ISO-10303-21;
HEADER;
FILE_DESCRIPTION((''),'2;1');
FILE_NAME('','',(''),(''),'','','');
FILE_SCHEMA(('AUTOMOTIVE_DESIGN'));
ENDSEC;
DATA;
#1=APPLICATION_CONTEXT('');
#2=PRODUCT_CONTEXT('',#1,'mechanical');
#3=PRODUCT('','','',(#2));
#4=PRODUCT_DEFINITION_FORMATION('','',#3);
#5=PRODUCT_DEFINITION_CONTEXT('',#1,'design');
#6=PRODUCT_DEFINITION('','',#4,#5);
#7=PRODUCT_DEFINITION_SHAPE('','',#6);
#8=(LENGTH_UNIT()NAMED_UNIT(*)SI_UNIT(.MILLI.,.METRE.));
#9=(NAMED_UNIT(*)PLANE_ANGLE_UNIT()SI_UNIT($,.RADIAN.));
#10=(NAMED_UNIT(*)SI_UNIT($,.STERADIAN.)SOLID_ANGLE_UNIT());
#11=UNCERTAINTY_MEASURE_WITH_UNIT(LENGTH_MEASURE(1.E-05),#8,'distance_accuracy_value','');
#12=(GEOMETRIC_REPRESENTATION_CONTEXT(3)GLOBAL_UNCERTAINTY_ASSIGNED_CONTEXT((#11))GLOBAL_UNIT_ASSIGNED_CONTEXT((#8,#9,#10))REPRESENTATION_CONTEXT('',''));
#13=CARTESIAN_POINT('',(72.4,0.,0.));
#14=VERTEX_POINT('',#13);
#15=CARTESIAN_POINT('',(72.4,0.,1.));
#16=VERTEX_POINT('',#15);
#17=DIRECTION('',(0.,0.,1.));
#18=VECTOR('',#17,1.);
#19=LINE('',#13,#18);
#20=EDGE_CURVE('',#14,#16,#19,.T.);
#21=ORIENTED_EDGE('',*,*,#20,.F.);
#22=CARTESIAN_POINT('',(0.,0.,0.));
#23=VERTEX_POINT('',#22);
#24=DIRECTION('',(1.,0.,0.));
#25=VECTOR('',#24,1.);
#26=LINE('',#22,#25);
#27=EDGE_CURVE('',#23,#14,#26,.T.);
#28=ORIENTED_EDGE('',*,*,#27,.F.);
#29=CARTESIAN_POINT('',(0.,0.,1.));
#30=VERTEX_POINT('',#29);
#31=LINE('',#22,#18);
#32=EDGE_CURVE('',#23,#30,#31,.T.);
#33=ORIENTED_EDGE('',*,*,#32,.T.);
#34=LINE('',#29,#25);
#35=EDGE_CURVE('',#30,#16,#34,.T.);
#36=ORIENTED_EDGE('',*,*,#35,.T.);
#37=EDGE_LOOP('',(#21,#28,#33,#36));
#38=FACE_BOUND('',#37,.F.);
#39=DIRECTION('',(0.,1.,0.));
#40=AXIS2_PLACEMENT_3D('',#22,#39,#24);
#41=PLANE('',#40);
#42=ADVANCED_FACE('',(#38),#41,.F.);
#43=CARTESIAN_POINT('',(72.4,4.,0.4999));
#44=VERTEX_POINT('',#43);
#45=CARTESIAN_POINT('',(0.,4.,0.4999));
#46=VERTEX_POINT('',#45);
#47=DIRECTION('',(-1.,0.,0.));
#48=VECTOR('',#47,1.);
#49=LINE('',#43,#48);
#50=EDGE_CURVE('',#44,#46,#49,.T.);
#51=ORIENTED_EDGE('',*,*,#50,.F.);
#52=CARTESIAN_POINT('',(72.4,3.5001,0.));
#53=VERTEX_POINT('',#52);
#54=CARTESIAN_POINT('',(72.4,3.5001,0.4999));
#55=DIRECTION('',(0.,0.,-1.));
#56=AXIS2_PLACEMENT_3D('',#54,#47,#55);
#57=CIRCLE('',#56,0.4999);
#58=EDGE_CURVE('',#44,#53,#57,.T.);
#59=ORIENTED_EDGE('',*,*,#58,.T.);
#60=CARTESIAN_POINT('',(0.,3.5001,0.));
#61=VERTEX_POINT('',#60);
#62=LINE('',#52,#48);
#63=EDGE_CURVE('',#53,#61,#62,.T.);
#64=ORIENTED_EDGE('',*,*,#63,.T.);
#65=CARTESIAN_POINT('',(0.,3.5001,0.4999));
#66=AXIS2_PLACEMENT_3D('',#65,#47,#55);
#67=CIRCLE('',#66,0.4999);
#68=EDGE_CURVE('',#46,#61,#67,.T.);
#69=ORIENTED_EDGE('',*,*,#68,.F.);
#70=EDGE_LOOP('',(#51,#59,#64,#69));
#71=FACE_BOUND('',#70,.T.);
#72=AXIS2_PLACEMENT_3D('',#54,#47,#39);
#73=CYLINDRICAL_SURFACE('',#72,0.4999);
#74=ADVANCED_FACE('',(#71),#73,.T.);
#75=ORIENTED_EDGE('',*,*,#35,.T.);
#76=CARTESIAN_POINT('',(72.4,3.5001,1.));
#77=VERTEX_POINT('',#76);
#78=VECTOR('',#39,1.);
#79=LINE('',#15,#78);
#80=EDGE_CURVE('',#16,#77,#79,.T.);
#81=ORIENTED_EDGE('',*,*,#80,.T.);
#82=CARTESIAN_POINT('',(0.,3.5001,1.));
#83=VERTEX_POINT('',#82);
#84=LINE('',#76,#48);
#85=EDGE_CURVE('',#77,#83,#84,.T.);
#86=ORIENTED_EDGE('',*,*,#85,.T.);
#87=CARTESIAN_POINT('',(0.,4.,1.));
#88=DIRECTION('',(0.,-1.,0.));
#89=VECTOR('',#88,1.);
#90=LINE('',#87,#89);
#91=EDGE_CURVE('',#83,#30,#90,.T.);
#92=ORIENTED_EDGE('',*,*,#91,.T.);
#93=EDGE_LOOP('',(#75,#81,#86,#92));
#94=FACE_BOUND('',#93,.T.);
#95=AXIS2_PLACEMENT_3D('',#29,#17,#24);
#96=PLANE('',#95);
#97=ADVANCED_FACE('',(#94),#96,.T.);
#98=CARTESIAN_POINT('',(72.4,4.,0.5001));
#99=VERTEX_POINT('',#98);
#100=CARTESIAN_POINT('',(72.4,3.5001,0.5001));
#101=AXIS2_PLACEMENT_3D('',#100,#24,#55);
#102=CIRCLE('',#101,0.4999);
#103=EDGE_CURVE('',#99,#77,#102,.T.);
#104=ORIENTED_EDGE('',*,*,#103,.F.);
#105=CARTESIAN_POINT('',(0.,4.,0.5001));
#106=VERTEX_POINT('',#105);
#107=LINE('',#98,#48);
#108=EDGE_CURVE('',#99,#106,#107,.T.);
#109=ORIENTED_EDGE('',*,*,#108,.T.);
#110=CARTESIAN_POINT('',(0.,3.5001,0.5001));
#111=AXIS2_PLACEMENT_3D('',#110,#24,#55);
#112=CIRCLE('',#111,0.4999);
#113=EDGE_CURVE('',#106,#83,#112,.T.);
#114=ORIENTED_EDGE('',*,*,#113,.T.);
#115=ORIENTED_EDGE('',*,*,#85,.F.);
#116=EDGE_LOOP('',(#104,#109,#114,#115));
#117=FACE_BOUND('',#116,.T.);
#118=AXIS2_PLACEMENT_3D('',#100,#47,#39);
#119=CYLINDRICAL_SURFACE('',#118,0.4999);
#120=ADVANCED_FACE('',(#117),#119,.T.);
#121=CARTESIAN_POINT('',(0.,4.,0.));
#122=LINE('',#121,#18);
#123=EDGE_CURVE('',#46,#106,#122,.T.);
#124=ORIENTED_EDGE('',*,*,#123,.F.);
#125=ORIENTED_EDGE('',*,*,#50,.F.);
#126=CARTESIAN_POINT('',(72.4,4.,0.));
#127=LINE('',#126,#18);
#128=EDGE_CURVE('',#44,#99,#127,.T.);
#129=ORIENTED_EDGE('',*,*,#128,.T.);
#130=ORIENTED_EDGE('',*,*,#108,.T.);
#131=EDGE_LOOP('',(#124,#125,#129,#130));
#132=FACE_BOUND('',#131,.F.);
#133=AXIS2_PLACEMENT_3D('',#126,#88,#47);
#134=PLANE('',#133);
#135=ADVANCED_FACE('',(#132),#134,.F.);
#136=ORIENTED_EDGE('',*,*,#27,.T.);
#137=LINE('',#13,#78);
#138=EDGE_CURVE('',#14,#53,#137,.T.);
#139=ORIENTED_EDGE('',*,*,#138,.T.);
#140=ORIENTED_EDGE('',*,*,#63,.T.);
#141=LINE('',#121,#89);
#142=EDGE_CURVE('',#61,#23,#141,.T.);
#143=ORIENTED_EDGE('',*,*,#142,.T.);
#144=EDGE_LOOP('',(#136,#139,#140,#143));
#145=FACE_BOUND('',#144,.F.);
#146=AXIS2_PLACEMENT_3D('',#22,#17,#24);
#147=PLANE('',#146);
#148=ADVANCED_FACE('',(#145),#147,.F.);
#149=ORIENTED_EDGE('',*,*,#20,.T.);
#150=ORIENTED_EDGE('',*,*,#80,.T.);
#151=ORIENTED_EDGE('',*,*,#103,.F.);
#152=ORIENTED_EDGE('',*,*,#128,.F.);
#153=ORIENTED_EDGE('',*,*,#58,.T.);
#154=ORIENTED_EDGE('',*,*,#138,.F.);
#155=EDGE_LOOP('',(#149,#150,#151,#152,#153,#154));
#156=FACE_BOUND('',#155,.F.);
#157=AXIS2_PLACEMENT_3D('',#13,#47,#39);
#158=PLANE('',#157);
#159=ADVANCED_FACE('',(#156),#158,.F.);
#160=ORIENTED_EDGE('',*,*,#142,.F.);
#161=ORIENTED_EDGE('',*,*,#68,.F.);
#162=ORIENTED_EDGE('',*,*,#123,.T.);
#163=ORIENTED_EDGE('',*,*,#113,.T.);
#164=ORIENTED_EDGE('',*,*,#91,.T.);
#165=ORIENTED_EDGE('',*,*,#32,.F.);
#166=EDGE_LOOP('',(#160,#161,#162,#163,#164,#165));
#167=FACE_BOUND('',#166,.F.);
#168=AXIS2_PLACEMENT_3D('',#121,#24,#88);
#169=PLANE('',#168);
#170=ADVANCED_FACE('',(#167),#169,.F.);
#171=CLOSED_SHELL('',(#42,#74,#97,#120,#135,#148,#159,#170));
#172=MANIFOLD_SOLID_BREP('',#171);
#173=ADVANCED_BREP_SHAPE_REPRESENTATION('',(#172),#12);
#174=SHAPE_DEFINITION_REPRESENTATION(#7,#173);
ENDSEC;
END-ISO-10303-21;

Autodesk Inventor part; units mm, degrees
ref_plane "YZ Plane" through (0, 0, 0) normal (1, 0, 0) x (0, 1, 0)
ref_plane "XZ Plane" through (0, 0, 0) normal (0, 1, 0) x (-1, 0, 0)
ref_plane "XY Plane" through (0, 0, 0) normal (0, 0, 1) x (1, 0, 0)
sketch "Szkic1" plane through (0, 0, 0) normal (0, 0, 1) x (1, 0, 0)
  line L0 (0, -0.8) -> (0, 4.8) construction
  line L1 (-14.48, 0) -> (86.88, 0) construction
  line L2 (0, 0) -> (72.4, 0)
  line L3 (72.4, 0) -> (72.4, 4)
  line L4 (72.4, 4) -> (0, 4)
  line L5 (0, 4) -> (0, 0)
  dimension "d0" = 4
  dimension "d1" = 72.4
extrude "Wyciągnięcie proste1" add sketch "Szkic1" along normal blind 1
fillet "Zaokrąglenie1" radius 0.5 2 edges at (36.2, 4, 1) (36.2, 4, 0)
properties part number "belka"
